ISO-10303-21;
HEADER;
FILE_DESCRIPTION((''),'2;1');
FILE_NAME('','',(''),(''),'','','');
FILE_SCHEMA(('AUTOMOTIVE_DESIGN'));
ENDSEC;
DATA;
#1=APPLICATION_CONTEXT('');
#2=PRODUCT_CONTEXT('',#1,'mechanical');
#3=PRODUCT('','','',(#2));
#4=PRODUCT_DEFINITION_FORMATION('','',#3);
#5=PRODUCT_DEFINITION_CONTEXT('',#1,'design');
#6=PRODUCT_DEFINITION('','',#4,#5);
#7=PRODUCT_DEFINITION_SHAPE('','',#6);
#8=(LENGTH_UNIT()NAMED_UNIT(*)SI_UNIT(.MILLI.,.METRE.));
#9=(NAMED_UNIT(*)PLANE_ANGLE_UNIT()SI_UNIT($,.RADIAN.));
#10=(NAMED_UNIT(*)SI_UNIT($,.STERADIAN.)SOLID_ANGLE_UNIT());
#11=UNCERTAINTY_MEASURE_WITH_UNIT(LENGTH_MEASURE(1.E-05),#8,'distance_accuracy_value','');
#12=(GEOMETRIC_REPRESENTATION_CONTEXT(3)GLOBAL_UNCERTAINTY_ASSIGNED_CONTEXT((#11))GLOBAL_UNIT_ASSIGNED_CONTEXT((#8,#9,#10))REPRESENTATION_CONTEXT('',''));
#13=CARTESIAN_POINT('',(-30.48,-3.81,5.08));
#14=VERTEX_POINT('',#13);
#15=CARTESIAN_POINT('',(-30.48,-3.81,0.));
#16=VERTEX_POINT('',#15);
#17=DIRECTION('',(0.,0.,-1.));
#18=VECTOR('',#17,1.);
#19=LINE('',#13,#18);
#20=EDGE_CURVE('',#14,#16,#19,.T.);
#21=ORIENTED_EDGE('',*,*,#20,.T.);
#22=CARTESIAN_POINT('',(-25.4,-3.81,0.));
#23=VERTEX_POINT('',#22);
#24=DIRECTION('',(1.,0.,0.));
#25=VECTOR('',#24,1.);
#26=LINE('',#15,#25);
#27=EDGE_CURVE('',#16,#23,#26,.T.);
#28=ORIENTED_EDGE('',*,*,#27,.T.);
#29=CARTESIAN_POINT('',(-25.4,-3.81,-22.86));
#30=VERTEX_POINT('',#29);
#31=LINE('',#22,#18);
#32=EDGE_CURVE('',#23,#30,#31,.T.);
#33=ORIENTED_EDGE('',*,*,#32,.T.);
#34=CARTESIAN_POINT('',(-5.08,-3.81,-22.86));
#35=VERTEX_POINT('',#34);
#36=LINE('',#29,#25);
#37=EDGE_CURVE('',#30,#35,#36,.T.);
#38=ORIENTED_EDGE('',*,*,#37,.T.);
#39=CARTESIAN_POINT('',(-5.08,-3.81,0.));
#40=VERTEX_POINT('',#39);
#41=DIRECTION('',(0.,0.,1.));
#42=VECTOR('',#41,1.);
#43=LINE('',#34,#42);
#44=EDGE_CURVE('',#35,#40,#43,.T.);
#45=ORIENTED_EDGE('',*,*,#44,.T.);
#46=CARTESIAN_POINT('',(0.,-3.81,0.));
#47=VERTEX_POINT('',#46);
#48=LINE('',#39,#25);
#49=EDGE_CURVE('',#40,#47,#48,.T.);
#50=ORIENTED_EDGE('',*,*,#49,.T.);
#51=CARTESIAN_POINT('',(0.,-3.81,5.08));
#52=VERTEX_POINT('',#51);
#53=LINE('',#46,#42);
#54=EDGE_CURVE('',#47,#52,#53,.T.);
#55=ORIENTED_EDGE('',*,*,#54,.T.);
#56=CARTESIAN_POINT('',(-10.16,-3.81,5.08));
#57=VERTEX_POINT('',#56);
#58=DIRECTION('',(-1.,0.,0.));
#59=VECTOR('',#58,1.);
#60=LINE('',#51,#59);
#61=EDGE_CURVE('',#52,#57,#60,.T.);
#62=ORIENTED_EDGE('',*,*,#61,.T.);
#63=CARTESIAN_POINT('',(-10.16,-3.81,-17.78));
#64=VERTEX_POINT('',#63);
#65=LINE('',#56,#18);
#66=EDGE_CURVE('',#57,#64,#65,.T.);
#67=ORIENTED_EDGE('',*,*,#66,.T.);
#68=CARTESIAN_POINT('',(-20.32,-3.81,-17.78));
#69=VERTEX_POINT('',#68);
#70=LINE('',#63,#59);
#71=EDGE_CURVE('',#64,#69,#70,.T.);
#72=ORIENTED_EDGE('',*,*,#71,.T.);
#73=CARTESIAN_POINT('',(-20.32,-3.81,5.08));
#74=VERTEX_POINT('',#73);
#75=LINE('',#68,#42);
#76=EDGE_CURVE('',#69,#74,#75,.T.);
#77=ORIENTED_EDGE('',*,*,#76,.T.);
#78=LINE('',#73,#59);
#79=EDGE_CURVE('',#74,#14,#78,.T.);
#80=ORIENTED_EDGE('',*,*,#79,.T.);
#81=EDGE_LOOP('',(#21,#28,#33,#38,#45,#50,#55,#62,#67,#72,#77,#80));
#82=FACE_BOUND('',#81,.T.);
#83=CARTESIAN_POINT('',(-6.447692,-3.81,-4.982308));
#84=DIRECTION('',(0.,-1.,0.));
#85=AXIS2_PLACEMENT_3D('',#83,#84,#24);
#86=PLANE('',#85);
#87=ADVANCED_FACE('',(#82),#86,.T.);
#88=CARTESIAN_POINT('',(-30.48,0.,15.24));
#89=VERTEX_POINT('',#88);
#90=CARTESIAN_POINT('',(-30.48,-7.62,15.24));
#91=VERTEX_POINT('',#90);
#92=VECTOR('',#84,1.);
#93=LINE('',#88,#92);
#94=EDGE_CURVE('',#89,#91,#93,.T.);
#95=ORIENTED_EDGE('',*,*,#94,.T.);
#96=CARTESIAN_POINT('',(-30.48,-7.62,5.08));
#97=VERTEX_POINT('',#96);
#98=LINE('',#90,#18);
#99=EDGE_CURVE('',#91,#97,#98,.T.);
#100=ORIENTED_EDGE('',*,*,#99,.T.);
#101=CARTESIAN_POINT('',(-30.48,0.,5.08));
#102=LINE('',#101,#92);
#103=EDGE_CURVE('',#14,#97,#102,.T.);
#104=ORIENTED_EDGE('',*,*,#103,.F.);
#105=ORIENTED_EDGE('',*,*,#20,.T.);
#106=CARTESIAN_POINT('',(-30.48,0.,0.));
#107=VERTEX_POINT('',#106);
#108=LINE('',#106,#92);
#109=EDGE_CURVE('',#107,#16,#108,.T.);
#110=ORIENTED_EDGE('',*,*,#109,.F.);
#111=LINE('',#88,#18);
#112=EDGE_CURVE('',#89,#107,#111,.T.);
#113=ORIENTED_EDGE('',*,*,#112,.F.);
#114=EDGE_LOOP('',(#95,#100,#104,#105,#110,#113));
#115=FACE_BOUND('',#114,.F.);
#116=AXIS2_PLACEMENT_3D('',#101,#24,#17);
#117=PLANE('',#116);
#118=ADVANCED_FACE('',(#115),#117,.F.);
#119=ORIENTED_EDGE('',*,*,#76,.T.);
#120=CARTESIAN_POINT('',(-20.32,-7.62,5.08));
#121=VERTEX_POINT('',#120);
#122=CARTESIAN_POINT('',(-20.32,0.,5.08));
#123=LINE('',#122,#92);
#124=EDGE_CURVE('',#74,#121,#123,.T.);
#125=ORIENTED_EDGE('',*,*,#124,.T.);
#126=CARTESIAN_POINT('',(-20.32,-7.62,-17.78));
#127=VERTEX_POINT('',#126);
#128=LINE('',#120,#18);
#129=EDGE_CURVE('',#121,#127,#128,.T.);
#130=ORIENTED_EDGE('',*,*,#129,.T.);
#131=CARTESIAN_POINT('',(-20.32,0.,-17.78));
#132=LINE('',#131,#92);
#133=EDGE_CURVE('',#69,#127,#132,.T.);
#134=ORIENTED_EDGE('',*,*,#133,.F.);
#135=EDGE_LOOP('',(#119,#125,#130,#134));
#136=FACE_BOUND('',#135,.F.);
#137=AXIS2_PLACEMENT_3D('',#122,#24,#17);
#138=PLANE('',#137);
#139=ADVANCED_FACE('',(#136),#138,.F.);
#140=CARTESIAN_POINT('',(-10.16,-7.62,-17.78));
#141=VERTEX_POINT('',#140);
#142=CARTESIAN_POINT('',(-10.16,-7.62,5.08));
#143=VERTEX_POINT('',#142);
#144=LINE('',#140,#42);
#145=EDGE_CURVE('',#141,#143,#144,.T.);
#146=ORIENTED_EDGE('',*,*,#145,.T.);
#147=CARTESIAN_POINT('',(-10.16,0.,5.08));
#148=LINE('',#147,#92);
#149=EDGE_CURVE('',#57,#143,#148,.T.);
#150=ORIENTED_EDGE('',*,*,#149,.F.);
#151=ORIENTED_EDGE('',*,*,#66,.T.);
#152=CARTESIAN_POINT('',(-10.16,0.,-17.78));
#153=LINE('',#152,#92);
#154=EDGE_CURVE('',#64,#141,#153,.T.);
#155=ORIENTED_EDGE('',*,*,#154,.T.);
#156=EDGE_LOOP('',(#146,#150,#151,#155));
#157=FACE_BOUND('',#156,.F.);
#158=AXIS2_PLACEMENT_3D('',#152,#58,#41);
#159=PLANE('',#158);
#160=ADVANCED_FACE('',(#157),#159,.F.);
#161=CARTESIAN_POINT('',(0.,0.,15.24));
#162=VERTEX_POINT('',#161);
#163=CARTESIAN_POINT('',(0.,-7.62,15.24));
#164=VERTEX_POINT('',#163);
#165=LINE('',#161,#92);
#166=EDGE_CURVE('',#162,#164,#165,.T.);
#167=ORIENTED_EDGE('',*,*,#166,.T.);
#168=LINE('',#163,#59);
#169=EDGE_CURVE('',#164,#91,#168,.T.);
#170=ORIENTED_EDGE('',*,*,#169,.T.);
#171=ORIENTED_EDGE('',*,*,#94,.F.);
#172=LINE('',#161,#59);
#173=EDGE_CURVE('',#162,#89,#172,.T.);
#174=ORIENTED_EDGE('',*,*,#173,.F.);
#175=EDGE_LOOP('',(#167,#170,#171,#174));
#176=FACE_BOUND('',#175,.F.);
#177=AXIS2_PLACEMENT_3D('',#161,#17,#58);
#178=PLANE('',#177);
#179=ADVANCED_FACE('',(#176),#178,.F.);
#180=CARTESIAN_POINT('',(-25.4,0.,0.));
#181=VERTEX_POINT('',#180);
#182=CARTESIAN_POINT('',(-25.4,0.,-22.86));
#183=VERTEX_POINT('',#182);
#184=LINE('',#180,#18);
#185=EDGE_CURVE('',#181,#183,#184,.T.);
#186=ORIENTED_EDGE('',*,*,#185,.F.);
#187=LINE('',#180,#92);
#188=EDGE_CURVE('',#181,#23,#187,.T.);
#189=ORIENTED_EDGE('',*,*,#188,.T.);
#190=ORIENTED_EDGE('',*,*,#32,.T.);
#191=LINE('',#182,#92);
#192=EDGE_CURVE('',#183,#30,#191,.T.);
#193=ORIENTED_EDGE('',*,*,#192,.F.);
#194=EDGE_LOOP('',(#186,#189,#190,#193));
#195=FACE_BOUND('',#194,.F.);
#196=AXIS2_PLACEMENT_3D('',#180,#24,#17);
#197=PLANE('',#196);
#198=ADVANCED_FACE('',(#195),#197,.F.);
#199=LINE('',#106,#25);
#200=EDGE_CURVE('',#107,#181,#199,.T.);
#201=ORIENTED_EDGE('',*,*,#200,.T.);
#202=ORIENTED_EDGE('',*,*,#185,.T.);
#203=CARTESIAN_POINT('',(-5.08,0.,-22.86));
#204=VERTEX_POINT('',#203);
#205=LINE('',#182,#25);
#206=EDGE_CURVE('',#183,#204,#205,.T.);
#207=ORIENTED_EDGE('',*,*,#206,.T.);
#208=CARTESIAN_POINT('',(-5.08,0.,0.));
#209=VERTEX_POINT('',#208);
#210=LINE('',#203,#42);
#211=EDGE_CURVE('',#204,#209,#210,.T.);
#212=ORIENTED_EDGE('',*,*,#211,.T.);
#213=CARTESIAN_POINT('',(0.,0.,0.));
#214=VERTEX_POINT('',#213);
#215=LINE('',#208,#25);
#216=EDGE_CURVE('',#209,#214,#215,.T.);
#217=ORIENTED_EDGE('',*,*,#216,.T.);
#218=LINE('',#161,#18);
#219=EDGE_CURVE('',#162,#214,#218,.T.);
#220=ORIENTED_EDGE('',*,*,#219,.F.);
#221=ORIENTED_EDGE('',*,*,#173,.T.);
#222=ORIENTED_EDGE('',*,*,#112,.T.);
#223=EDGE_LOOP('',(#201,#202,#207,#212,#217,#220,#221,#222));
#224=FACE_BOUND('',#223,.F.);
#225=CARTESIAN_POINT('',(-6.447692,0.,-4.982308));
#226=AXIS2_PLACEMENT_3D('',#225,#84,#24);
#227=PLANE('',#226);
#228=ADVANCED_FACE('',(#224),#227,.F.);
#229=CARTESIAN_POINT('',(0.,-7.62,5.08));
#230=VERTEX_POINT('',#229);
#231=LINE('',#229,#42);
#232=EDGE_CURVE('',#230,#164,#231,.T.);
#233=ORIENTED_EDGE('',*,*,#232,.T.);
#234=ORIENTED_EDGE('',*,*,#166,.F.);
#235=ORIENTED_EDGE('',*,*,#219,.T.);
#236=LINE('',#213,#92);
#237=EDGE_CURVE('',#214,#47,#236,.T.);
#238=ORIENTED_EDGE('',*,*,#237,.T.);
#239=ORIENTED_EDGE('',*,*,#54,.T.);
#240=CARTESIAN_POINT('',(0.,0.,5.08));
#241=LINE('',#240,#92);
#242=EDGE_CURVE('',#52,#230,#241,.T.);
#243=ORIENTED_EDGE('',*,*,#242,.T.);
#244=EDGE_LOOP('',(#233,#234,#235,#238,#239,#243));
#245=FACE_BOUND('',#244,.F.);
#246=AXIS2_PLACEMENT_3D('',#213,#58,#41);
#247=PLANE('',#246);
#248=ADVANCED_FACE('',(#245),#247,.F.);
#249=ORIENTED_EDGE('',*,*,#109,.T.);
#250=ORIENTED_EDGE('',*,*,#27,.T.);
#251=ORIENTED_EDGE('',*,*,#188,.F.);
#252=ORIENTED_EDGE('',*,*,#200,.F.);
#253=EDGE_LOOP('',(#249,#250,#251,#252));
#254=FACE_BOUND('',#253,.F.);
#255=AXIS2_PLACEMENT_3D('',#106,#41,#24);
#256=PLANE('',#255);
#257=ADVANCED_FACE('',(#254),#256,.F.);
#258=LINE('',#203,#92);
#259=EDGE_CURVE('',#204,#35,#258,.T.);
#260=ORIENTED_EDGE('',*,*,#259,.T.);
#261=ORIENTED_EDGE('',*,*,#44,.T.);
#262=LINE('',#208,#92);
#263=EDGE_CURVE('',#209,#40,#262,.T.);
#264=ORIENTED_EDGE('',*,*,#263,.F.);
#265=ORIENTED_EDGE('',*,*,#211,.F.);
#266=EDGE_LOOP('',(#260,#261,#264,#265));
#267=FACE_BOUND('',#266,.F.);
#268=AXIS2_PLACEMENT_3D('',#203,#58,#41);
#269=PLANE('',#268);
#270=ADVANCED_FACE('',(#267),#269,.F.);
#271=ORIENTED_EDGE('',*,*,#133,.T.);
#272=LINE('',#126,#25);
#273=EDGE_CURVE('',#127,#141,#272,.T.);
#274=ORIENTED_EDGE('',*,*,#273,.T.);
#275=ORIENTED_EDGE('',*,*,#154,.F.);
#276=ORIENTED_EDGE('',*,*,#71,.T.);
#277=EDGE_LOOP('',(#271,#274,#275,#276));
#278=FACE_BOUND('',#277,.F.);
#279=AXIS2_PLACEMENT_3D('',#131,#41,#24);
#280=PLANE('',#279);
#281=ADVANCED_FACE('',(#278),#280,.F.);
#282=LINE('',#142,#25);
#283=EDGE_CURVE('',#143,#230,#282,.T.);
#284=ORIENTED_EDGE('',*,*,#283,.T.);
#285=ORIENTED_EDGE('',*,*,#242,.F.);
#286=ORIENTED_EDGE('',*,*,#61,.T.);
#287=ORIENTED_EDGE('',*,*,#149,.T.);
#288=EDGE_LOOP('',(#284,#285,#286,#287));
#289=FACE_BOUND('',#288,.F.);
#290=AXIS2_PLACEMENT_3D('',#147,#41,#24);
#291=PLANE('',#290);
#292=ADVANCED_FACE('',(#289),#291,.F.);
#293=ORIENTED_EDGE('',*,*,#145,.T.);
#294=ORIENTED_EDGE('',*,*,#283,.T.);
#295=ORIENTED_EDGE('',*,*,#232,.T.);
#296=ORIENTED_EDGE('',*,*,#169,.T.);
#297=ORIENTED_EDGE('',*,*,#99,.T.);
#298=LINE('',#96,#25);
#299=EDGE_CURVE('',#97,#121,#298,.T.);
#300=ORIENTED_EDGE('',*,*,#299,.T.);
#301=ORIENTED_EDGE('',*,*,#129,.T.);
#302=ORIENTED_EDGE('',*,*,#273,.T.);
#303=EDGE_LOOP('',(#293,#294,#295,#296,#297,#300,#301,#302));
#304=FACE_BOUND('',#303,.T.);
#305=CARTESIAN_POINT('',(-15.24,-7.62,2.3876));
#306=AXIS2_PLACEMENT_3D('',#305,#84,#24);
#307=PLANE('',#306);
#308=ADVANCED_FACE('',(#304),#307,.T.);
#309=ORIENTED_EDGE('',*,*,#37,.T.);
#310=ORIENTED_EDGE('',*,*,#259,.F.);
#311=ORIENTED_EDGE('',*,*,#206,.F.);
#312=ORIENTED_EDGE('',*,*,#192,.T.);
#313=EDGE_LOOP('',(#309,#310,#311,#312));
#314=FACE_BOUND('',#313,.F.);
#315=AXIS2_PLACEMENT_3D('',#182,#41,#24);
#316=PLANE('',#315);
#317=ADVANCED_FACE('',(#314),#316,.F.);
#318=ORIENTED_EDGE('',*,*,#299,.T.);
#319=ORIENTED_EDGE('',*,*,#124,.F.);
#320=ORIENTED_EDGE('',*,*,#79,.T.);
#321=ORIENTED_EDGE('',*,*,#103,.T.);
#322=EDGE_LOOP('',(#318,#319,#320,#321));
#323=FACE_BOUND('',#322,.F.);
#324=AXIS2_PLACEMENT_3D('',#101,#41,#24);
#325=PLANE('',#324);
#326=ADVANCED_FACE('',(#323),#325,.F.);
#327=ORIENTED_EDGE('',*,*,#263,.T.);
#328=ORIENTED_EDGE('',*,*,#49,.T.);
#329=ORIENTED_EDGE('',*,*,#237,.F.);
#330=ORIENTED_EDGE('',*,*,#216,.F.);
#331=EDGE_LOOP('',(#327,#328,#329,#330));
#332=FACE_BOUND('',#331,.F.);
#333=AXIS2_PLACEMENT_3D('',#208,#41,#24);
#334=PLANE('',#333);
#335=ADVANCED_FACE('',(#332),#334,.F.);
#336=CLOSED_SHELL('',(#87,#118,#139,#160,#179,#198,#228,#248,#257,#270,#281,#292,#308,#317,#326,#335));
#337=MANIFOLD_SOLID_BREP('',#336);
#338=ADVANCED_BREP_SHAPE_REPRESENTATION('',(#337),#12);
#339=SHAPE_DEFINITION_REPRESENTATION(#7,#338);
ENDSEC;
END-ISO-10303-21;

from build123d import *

# Parameters (mm, degrees)
F1_DEPTH = 7.62
F2_DEPTH = 3.81


# Not quite as in the source:
# - a feature names something its author has since deleted; it is built from what else it names


with BuildPart() as f1:
    # F0 (on Front) → F1 (new body)
    with BuildSketch(Plane.XZ):
        Polygon((-20.32, 5.08), (-20.32, -17.78), (-10.16, -17.78), (-10.16, 5.08), (0, 5.08), (0, 15.24), (-30.48, 15.24), (-30.48, 5.08), align=None)
    extrude(amount=F1_DEPTH)

    # F0 (on Front) → F2 (join)
    with BuildSketch(Plane.XZ):
        Polygon((-10.16, 5.08), (-10.16, -17.78), (-5.08, -17.78), (-5.08, 0), (0, 0), (0, 5.08), align=None)
        Polygon((-20.32, -17.78), (-25.4, -17.78), (-25.4, -22.86), (-5.08, -22.86), (-5.08, -17.78), (-10.16, -17.78), align=None)
        Polygon((-25.4, 0), (-25.4, -17.78), (-20.32, -17.78), (-20.32, 5.08), (-30.48, 5.08), (-30.48, 0), align=None)
    extrude(amount=F2_DEPTH)


solid = f1.part
